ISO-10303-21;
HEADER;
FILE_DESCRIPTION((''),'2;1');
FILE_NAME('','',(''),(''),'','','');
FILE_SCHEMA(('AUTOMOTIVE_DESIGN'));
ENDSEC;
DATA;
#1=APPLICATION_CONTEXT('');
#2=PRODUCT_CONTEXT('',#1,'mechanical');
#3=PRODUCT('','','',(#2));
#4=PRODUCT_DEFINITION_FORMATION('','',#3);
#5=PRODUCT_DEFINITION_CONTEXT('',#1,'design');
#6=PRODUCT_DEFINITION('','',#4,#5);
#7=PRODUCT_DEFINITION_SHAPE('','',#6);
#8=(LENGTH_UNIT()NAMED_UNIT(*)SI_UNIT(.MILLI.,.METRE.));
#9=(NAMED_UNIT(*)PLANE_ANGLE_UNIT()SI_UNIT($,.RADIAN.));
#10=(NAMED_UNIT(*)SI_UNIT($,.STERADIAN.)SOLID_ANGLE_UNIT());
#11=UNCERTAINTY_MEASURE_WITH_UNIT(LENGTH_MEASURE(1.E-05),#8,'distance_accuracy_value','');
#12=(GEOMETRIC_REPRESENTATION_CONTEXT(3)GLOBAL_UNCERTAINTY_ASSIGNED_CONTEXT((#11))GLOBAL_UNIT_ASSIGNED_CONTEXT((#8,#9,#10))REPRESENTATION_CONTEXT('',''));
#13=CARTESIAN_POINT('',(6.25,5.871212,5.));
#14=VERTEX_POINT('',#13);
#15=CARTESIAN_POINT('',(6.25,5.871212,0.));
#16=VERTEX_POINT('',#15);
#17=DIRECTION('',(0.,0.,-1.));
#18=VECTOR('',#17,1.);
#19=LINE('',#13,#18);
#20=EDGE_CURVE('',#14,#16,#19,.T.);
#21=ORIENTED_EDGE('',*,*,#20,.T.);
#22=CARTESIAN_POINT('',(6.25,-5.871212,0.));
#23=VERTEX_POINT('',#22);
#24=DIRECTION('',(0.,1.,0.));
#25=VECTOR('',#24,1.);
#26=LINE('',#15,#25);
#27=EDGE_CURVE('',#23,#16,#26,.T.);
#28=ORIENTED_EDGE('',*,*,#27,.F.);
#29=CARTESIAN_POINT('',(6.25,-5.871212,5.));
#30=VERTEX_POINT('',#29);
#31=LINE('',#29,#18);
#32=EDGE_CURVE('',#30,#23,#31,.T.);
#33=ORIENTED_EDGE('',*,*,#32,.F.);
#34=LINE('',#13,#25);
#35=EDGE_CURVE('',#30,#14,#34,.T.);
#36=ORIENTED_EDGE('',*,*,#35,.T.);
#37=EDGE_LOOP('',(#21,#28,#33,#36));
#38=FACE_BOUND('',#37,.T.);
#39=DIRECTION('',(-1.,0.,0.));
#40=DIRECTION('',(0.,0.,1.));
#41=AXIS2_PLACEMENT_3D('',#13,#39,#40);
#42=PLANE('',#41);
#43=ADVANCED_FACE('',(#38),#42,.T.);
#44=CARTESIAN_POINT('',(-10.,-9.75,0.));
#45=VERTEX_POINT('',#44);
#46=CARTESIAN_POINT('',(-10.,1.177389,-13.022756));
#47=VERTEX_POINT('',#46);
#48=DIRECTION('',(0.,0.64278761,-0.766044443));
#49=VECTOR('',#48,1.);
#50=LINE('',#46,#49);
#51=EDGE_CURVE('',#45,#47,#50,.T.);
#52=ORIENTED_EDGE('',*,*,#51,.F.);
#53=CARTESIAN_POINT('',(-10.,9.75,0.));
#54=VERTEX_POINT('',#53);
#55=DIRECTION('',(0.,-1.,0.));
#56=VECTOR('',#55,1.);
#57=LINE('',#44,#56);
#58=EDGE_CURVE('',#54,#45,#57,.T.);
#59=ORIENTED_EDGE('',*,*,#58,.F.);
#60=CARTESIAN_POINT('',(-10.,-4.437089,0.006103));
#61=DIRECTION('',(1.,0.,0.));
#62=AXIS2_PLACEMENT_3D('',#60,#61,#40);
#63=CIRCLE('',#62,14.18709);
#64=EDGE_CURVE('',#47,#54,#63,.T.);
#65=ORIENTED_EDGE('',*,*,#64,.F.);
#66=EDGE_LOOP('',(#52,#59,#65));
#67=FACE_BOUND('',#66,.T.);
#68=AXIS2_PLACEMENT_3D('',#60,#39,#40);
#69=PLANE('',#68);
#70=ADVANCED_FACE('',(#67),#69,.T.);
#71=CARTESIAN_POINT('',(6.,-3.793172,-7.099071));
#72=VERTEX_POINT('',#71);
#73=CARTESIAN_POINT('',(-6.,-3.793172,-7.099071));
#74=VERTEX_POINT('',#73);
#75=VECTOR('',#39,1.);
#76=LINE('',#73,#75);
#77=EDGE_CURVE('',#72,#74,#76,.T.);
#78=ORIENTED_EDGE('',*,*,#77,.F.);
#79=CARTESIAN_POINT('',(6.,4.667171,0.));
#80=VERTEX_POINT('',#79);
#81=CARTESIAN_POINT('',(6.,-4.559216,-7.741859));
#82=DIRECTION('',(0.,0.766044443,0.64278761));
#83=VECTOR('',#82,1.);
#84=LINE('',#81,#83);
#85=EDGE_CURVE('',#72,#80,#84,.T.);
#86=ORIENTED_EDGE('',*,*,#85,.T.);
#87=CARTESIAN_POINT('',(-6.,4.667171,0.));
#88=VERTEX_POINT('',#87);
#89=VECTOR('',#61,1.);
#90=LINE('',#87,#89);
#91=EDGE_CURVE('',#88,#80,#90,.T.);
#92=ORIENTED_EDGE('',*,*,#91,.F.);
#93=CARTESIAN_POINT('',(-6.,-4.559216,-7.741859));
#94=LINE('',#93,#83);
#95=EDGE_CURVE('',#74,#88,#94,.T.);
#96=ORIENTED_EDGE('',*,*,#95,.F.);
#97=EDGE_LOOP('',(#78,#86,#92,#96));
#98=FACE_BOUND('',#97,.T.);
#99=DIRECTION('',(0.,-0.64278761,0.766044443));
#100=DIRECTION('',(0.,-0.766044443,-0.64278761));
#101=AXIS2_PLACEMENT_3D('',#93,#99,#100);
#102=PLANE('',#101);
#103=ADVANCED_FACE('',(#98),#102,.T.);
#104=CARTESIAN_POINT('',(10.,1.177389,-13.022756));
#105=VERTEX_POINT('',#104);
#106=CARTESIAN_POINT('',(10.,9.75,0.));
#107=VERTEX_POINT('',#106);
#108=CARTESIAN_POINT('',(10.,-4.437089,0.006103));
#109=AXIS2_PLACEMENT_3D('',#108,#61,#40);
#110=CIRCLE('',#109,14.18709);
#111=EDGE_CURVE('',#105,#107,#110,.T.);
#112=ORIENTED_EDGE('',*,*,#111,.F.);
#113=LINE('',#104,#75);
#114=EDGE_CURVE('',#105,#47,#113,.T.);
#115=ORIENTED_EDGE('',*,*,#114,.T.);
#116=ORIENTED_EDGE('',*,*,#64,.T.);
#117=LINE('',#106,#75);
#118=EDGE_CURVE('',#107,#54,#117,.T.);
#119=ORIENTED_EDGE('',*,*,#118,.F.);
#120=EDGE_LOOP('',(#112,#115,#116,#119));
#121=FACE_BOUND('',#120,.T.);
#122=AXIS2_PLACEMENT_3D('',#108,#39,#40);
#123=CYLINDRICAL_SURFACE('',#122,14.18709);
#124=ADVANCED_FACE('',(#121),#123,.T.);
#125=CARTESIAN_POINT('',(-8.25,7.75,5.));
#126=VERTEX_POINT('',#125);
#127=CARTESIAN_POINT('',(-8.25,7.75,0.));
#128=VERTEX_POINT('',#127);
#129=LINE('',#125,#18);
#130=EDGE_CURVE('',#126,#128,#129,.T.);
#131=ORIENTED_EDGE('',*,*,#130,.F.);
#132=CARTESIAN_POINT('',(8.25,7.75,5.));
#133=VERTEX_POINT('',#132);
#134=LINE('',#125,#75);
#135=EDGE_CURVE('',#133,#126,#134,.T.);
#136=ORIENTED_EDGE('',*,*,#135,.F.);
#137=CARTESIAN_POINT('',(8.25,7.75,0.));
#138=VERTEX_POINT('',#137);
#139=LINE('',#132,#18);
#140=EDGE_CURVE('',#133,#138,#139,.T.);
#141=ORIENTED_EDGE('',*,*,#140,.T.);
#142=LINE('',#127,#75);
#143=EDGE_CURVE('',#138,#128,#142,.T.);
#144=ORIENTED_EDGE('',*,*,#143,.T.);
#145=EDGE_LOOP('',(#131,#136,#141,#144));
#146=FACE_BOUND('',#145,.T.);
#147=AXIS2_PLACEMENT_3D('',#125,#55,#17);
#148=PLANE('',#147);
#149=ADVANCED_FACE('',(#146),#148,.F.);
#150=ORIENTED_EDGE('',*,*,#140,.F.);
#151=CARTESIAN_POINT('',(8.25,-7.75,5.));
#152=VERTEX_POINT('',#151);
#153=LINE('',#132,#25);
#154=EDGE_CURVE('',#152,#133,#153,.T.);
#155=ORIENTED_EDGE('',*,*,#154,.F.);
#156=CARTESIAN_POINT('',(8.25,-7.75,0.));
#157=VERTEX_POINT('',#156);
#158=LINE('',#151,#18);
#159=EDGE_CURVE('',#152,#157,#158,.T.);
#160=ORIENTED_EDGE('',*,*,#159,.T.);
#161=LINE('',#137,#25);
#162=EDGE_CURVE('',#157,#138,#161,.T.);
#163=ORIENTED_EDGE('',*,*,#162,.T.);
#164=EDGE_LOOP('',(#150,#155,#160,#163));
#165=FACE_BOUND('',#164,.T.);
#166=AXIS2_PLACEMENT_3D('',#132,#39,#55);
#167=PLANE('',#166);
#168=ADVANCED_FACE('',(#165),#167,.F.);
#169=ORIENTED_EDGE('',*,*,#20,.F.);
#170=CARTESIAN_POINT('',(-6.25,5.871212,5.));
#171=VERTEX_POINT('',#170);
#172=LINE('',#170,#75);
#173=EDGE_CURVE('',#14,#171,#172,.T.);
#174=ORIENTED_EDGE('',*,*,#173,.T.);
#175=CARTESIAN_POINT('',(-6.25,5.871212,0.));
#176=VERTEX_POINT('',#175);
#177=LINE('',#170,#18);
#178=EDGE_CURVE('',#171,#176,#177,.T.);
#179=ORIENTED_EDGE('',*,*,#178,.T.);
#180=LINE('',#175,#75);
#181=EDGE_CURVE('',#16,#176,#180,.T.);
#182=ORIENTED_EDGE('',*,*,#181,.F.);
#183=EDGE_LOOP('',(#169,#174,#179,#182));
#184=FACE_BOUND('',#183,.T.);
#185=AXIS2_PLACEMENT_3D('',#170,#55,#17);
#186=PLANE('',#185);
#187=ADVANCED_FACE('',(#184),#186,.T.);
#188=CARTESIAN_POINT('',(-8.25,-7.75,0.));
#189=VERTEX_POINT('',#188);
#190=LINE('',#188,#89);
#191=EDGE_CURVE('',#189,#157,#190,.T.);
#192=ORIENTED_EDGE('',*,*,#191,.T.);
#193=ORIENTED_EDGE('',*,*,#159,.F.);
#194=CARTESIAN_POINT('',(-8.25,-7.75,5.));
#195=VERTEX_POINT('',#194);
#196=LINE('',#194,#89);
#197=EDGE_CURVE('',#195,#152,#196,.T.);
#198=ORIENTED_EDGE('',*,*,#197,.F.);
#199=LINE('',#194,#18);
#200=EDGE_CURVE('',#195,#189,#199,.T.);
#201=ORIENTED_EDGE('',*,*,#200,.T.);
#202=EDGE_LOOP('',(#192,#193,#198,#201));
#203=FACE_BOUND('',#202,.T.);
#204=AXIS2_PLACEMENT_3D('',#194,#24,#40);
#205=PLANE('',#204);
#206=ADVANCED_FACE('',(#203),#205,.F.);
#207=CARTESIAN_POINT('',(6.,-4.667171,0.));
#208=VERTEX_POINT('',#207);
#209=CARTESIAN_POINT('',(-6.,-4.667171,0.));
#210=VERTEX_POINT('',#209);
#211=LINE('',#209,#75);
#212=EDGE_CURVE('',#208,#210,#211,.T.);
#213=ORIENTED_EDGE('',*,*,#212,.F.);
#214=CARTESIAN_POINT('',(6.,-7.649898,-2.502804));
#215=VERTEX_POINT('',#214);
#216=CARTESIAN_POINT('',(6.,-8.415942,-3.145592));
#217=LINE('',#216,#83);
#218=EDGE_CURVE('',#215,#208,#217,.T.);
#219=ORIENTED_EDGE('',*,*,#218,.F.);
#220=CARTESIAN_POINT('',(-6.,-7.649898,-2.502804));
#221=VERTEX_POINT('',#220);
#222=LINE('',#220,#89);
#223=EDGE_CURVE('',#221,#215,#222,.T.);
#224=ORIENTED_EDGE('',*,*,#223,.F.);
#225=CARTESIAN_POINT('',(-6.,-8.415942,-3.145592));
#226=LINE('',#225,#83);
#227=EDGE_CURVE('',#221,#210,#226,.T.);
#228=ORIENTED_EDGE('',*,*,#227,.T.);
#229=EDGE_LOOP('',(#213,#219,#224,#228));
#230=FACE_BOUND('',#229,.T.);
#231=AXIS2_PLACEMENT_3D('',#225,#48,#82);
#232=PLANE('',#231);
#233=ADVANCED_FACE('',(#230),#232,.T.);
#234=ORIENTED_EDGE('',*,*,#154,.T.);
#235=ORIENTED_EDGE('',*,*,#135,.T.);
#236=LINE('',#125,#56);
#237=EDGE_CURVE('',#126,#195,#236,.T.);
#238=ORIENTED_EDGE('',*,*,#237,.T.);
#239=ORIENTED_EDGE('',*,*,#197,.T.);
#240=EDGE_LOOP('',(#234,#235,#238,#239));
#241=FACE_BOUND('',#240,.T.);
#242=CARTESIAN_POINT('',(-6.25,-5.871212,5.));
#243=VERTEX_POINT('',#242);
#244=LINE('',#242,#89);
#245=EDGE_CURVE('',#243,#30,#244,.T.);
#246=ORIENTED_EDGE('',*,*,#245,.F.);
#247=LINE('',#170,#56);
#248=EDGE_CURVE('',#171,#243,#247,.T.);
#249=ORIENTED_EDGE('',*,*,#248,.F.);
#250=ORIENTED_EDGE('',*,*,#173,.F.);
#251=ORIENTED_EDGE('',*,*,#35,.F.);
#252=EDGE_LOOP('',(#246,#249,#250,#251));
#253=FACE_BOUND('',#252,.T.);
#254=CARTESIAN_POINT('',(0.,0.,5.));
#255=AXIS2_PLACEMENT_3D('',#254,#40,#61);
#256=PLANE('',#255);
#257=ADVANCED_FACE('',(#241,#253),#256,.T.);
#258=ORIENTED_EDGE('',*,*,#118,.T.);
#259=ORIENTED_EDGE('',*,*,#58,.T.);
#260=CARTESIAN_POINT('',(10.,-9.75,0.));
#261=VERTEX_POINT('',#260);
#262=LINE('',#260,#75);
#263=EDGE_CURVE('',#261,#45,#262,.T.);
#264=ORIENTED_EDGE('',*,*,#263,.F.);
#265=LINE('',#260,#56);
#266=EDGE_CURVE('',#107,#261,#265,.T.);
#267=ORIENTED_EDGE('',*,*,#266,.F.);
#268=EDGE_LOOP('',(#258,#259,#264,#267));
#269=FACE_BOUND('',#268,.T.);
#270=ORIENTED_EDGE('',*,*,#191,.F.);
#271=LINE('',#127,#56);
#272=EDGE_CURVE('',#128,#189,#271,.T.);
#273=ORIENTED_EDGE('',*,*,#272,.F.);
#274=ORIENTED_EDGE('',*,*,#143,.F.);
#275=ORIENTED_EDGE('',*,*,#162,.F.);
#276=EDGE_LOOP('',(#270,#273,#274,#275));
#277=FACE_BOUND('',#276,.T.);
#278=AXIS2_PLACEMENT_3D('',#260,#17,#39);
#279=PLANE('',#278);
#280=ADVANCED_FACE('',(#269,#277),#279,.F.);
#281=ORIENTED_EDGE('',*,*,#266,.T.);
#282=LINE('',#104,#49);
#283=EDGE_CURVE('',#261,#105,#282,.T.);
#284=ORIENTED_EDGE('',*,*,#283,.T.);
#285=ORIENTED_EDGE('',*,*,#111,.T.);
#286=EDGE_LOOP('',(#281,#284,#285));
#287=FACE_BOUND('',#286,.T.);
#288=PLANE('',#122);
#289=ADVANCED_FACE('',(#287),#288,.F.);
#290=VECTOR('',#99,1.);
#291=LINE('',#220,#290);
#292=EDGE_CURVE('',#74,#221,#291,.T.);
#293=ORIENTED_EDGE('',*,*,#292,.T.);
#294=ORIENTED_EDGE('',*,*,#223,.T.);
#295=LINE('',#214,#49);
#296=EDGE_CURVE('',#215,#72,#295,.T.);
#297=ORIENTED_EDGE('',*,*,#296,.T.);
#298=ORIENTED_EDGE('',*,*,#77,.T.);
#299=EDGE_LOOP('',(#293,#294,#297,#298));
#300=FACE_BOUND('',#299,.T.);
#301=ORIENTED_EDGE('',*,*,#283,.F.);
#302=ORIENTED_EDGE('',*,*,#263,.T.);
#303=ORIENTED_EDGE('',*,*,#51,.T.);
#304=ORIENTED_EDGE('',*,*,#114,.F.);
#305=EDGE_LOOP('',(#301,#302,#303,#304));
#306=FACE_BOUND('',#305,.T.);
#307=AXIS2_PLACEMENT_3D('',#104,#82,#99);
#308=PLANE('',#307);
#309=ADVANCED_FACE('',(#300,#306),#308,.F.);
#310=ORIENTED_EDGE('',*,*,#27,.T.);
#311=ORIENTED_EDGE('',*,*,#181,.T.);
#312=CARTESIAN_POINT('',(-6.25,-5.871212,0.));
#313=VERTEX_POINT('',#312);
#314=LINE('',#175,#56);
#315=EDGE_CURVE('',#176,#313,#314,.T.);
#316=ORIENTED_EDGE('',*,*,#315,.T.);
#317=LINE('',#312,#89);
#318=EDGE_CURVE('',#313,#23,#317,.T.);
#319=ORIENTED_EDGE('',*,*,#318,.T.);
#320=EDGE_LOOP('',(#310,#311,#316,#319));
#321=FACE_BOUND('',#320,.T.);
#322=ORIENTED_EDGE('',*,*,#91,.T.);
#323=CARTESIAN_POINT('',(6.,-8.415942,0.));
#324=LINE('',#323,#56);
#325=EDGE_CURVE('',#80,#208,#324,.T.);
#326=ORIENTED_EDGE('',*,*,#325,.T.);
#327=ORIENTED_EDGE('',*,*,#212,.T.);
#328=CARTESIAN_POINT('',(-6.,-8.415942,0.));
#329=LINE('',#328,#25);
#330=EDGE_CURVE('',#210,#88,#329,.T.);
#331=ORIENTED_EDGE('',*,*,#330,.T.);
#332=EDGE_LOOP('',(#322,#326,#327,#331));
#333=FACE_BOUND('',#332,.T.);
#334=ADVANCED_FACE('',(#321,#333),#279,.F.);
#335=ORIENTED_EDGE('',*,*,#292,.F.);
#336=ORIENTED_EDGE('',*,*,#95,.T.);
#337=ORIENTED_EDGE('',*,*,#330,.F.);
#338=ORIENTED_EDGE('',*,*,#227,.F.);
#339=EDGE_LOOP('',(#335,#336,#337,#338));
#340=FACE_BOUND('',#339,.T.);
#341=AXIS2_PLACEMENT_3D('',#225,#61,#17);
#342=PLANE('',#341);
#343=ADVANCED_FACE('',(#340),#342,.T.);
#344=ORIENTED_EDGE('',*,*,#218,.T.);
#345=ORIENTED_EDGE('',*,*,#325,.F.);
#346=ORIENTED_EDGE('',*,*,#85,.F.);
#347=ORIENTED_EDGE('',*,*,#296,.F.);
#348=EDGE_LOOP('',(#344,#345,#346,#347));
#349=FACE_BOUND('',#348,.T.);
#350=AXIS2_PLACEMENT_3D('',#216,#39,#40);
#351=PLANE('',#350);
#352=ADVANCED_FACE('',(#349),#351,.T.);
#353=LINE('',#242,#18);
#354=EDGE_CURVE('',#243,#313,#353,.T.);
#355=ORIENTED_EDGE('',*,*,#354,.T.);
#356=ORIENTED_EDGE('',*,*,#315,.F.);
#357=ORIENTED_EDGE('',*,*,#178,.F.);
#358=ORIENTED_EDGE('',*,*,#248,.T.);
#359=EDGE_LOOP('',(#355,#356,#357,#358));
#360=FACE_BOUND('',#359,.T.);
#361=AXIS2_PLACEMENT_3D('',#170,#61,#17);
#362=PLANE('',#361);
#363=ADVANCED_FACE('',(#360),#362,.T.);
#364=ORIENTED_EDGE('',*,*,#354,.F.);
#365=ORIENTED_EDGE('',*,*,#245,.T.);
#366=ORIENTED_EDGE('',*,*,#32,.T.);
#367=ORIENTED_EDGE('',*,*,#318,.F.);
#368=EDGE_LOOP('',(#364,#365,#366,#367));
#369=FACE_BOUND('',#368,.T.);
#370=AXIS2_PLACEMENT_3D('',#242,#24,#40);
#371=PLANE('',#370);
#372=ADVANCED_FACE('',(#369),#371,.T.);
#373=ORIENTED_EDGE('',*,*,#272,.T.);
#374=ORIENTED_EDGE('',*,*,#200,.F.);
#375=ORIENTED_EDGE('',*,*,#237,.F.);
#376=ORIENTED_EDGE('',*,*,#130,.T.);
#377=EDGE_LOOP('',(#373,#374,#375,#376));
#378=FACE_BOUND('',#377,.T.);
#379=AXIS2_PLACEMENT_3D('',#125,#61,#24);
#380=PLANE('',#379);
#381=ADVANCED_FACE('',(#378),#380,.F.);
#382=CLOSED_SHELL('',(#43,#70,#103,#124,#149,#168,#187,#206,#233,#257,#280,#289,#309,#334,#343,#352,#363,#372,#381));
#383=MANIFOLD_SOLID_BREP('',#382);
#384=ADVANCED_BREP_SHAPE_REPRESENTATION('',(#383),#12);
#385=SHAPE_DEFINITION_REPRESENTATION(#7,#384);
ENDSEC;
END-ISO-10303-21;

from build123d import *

# Parameters (mm, degrees)
SKETCH1_W           = 16.5
SKETCH1_H           = 15.5
SKETCH1_W_2         = 12.5
SKETCH1_H_2         = 11.742424242
BOSS_EXTRUDE1_DEPTH = 5
BOSS_EXTRUDE2_DEPTH = 10
CUT_SWEEP1_START    = -6
CUT_SWEEP1_DEPTH    = 12


# Read off the part's stored shape, not the designer's step: Cut-Sweep1
with BuildPart() as part:
    # Sketch1 → Boss-Extrude1 (new body)
    with BuildSketch(Plane.XY):
        Rectangle(SKETCH1_W, SKETCH1_H)
        Rectangle(SKETCH1_W_2, SKETCH1_H_2, mode=Mode.SUBTRACT)
    extrude(amount=BOSS_EXTRUDE1_DEPTH)

    # Sketch3 → Boss-Extrude2 (add, symmetric)
    with BuildSketch(Plane(origin=(0, 0, 0), x_dir=(0, 0, -1), z_dir=(1, 0, 0))):
        with BuildLine():
            Line((13.022755533, 1.177389365), (0, -9.75))
            Line((0, -9.75), (0, 9.75))
            ThreePointArc((0, 9.75), (7.794535943, 7.412955642), (13.022755533, 1.177389365))
        make_face()
    extrude(amount=BOSS_EXTRUDE2_DEPTH, both=True)

    # Cut-Sweep1 outline → Cut-Sweep1 (cut)
    with BuildSketch(Plane.YZ.offset(CUT_SWEEP1_START)):
        Polygon((-3.793172037, -7.099071125), (4.667171481, 0), (-4.667171481, 0), (-7.649897695, -2.502804467), align=None)
    extrude(amount=CUT_SWEEP1_DEPTH, mode=Mode.SUBTRACT)


solid = part.part
